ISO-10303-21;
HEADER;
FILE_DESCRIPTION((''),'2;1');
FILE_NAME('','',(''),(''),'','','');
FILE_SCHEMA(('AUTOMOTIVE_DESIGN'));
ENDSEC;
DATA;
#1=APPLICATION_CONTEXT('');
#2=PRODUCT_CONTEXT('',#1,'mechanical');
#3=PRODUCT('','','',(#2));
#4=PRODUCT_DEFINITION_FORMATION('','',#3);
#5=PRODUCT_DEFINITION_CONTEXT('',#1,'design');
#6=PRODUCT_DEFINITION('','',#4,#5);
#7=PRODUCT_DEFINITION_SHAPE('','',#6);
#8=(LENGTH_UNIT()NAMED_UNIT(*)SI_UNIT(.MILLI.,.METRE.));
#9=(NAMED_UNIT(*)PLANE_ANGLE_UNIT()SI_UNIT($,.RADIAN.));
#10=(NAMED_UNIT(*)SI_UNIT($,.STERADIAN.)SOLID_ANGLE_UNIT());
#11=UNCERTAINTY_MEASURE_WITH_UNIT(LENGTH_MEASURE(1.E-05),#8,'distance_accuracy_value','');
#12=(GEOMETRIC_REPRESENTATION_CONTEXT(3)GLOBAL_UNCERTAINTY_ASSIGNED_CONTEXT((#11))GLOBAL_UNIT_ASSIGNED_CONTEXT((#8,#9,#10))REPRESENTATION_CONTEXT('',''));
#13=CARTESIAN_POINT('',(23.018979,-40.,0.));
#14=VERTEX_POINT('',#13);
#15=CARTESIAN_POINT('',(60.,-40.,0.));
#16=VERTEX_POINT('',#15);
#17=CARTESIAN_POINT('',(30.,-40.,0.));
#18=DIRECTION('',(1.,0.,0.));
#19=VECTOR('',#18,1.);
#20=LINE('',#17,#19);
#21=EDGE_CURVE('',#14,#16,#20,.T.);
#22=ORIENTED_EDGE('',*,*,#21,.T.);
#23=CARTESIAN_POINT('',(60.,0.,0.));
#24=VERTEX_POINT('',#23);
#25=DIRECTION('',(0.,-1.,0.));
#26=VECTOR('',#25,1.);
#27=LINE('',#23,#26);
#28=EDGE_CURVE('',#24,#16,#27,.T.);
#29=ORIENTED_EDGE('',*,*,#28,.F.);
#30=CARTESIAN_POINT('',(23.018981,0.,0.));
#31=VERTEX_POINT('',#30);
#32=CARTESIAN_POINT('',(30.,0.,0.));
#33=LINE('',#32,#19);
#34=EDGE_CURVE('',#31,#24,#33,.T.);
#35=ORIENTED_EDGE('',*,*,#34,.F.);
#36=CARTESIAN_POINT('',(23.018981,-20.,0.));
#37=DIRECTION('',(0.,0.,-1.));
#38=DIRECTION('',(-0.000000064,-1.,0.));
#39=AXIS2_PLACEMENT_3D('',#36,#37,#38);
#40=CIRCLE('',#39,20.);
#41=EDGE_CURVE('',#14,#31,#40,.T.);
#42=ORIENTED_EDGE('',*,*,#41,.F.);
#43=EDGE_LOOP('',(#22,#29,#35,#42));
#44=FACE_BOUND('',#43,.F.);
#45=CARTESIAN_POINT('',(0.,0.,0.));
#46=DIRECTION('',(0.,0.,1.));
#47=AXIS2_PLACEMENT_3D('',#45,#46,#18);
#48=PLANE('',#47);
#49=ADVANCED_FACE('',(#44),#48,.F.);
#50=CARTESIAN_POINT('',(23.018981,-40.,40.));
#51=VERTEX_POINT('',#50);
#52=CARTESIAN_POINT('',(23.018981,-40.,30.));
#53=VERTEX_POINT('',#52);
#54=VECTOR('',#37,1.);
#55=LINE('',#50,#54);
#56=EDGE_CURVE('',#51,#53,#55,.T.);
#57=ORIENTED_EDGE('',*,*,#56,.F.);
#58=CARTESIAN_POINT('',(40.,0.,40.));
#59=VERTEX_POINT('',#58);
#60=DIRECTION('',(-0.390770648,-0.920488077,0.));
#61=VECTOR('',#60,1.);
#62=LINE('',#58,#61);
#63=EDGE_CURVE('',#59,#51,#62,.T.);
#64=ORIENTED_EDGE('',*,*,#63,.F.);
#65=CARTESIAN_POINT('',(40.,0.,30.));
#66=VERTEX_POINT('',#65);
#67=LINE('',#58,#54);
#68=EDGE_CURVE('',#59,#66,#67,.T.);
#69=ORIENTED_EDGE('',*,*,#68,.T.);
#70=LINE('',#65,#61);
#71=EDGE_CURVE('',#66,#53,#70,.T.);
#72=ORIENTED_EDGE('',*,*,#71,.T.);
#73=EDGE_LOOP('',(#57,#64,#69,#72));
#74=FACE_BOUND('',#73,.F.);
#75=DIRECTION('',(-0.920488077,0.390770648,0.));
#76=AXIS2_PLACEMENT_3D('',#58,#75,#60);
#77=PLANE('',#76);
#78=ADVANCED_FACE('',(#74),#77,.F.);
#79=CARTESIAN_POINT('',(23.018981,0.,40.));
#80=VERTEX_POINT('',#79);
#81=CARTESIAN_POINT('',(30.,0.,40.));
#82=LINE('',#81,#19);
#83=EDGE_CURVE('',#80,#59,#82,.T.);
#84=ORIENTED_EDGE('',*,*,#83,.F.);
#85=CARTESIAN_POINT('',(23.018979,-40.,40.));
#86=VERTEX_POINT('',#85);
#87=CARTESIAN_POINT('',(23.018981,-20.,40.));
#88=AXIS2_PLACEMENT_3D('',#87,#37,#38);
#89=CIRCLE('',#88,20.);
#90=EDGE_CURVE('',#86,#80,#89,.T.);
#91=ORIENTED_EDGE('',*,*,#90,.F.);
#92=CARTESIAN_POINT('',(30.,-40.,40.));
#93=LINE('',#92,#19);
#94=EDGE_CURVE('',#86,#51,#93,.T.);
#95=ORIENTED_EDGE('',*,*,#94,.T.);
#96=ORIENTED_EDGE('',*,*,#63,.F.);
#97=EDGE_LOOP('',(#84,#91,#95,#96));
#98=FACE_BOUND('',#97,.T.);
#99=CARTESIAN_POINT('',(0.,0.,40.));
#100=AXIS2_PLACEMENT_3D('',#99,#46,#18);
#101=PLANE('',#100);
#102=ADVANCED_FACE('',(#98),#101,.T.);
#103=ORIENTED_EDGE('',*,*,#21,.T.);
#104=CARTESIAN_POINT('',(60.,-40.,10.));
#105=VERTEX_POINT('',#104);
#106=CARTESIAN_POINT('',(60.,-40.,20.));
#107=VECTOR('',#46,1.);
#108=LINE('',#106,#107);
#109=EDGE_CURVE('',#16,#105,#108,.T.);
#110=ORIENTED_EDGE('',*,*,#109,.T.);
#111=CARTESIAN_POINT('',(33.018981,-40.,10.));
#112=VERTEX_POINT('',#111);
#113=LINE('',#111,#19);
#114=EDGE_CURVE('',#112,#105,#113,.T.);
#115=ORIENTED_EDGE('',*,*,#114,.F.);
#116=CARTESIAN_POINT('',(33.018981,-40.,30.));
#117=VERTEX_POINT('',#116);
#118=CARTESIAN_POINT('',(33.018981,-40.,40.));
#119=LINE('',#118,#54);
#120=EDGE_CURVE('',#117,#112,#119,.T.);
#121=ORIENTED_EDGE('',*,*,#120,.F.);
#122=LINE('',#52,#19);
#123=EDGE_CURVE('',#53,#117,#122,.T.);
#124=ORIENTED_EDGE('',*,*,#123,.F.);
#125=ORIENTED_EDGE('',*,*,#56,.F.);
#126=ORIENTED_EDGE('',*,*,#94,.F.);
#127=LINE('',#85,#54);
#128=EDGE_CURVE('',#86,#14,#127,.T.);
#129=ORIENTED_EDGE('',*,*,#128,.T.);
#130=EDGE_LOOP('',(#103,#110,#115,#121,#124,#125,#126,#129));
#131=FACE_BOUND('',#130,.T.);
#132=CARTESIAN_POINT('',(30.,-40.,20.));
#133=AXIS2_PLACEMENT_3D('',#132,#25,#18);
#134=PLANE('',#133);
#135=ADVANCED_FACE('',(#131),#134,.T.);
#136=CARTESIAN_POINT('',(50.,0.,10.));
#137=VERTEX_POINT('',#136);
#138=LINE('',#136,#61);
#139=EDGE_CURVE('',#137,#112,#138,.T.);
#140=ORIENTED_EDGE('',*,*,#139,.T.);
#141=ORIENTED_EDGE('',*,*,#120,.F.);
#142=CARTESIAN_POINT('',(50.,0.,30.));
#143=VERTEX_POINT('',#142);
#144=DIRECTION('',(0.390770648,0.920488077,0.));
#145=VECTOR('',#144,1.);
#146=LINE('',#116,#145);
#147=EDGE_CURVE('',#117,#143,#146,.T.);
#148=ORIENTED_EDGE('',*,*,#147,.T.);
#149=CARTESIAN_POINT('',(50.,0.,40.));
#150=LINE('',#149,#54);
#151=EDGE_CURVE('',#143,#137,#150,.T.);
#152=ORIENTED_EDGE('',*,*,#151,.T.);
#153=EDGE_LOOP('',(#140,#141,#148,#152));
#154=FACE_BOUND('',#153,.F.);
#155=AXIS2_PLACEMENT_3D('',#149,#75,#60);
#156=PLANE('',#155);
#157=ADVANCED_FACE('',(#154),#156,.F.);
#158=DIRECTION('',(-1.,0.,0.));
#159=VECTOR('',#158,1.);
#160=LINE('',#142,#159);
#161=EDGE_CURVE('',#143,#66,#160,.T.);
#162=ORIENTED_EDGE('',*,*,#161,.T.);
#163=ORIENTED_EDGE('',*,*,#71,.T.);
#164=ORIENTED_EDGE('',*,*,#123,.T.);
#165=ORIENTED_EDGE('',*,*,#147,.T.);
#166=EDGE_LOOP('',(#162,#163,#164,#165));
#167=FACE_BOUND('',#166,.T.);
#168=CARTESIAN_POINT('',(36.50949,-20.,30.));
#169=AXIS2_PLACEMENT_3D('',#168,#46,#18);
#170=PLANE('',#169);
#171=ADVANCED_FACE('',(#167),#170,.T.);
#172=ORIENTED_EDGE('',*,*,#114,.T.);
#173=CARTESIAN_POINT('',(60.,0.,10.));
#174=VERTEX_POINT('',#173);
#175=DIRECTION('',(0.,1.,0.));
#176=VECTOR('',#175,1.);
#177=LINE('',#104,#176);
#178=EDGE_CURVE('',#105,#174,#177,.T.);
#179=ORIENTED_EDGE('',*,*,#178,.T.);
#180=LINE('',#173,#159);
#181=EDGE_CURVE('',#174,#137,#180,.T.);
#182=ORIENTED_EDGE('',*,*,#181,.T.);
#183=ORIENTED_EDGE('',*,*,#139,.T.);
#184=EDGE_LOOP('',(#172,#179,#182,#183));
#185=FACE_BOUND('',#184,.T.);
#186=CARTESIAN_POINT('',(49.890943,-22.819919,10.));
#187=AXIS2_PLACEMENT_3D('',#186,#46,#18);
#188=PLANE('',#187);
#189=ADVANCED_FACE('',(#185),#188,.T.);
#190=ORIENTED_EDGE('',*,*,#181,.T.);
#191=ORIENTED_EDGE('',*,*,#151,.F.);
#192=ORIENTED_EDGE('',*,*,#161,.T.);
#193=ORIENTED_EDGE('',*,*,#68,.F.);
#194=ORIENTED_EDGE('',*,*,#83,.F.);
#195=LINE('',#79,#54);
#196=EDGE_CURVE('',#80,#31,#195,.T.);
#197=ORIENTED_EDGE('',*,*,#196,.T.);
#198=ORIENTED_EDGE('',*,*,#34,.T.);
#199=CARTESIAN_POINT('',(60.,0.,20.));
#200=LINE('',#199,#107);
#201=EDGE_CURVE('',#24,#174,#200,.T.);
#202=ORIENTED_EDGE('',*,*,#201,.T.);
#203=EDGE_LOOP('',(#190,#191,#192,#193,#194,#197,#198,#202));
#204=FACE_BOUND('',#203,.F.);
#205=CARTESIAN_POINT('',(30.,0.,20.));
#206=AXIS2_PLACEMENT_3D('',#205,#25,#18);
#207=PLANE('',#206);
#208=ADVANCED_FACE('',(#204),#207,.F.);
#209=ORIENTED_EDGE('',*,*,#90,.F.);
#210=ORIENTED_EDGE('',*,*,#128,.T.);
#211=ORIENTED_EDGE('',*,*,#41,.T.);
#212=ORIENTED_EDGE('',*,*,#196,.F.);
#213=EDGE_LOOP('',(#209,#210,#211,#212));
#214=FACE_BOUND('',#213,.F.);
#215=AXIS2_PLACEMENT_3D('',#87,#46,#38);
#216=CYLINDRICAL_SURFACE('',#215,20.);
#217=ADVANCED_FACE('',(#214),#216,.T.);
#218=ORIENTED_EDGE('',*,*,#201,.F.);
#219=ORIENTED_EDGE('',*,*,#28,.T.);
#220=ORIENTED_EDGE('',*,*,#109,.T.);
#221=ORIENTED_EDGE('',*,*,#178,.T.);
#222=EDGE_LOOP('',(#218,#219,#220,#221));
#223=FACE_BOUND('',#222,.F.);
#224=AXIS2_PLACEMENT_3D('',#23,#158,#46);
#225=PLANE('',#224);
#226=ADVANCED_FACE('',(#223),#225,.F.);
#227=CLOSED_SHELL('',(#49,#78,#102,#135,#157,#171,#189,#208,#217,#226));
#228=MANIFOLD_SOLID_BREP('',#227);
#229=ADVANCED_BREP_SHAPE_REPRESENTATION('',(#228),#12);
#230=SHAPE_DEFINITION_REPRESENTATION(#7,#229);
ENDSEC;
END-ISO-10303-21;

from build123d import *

# Parameters (mm, degrees)
F0_W     = 60
F0_H     = 40
F1_DEPTH = 40
F3_DEPTH = 40
F5_DEPTH = 30
F7_DEPTH = 10


# Not quite as in the source:
# - ends of sketch curves that miss each other by under 0.0002 mm in the source are joined


with BuildPart() as f1:
    # F0 (on Front) → F1 (new body)
    with BuildSketch(Plane.XZ):
        with Locations((30, 20)):
            Rectangle(F0_W, F0_H)
    extrude(amount=F1_DEPTH)

    # F2 (on face) → F3 (cut)
    with BuildSketch(Plane.XY.offset(40)):
        with BuildLine():
            ThreePointArc((23.0189793024, -40), (3.0189805751, -19.9999993636), (23.0189805751, 0))
            Line((23.0189805751, 0), (0, 0))
            Line((0, 0), (0, -40))
            Line((0, -40), (23.0189793024, -40))
        make_face()
    extrude(amount=-F3_DEPTH, mode=Mode.SUBTRACT)

    # F4 (on face) → F5 (cut)
    with BuildSketch(Plane.XY.offset(40)):
        Polygon((50, 0), (33.0189805751, -40), (60, -40), (60, 0), align=None)
    extrude(amount=-F5_DEPTH, mode=Mode.SUBTRACT)

    # F6 (on face) → F7 (cut)
    with BuildSketch(Plane.XY.offset(40)):
        Polygon((40, 0), (23.0189805751, -40), (33.0189805751, -40), (50, 0), align=None)
    extrude(amount=-F7_DEPTH, mode=Mode.SUBTRACT)


solid = f1.part
